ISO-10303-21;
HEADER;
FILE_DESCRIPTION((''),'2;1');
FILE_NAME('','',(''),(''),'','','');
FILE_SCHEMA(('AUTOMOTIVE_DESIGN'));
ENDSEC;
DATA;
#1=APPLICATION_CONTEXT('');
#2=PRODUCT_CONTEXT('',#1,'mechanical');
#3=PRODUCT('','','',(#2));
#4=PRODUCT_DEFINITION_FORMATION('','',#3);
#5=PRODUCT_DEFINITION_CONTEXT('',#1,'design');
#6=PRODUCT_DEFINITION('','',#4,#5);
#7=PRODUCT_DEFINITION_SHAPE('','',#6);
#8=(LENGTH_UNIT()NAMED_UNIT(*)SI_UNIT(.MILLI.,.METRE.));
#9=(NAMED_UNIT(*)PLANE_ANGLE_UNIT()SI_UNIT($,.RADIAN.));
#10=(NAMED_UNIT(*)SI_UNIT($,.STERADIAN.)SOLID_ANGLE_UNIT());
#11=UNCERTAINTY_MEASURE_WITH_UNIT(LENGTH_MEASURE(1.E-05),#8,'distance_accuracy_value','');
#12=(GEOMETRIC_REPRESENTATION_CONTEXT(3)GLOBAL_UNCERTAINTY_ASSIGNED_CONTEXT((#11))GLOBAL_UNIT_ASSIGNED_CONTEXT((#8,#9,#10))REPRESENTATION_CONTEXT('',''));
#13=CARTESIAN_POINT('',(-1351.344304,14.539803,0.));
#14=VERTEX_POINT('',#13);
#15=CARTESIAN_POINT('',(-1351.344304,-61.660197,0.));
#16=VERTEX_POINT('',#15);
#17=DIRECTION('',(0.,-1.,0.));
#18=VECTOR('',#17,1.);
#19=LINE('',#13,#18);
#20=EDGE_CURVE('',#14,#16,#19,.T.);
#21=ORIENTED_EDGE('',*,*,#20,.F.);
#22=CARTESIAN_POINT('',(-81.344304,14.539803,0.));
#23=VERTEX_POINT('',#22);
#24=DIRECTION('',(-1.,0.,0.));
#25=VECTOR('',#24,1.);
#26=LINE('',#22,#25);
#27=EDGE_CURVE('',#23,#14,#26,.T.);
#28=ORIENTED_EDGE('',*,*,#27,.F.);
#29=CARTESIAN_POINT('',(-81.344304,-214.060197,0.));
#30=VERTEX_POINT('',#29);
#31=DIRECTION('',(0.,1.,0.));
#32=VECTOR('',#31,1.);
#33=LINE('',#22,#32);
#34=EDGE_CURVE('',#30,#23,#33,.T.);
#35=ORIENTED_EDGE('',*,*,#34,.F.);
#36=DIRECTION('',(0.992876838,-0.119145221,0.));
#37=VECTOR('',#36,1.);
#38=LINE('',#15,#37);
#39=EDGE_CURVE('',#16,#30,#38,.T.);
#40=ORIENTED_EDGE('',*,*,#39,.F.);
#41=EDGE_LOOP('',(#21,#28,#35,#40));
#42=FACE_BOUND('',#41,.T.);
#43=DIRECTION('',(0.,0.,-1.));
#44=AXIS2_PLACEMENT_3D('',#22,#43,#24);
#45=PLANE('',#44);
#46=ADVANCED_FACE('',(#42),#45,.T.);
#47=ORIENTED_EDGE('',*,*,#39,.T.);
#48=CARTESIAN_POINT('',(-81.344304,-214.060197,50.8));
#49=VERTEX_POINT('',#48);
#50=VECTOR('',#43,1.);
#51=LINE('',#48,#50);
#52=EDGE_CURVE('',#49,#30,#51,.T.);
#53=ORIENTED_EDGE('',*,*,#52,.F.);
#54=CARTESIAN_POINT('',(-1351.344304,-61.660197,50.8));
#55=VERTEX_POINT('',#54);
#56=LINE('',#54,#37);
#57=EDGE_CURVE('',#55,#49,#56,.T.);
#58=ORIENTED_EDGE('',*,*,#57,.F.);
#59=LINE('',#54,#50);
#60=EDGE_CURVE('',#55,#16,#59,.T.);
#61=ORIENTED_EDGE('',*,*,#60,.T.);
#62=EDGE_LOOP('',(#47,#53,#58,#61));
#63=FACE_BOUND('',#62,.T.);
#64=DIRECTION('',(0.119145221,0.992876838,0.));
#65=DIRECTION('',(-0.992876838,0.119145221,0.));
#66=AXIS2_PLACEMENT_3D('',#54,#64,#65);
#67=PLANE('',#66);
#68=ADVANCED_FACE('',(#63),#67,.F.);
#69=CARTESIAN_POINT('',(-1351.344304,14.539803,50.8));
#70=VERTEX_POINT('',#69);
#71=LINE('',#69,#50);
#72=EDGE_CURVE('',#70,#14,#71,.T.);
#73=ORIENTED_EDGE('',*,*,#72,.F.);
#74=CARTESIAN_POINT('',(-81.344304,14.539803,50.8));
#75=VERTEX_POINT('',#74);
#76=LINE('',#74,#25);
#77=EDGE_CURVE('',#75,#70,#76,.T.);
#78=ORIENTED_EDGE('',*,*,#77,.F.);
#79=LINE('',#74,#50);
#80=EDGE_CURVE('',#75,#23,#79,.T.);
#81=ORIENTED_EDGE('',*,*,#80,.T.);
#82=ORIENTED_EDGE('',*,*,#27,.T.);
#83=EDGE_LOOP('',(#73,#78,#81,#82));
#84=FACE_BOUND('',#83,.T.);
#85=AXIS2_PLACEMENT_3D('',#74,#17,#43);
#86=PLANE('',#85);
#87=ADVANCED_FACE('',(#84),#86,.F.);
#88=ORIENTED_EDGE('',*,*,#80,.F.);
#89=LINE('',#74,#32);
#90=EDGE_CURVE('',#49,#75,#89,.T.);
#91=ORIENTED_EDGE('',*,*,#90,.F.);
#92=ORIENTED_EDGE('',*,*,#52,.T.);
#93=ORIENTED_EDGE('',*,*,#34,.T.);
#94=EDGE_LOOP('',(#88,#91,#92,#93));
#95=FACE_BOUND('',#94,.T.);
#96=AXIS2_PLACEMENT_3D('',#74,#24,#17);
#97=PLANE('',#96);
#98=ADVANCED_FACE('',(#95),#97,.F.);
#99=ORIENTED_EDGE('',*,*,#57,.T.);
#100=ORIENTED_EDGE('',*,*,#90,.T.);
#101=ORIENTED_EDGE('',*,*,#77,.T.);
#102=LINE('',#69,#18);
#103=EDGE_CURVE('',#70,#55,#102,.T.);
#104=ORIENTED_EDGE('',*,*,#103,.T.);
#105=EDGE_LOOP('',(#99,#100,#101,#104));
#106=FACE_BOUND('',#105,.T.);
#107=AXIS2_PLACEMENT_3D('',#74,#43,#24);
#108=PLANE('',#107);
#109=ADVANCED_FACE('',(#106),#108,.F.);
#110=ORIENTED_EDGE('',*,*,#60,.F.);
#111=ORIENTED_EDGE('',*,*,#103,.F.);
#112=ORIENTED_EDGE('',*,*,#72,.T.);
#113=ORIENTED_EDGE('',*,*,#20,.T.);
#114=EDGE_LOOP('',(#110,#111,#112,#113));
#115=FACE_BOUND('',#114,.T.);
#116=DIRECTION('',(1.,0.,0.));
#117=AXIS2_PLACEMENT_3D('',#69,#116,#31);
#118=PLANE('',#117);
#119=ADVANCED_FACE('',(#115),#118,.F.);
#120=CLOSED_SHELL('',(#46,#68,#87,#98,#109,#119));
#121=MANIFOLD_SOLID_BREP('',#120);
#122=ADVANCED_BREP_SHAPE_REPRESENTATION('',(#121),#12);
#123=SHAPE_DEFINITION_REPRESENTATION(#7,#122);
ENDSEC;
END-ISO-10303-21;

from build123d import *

# Parameters (mm, degrees)
BASE_FLANGE1_DEPTH = 50.8


# Sheet-metal steps are written as plain solids
with BuildPart() as part:
    # Sketch1 → Base-Flange1 (new body)
    with BuildSketch(Plane.XY):
        Polygon((-81.344303797, 14.539803094), (-1351.344303797, 14.539803094), (-1351.344303797, -61.660196906), (-81.344303797, -214.060196906), align=None)
    extrude(amount=BASE_FLANGE1_DEPTH)


solid = part.part
